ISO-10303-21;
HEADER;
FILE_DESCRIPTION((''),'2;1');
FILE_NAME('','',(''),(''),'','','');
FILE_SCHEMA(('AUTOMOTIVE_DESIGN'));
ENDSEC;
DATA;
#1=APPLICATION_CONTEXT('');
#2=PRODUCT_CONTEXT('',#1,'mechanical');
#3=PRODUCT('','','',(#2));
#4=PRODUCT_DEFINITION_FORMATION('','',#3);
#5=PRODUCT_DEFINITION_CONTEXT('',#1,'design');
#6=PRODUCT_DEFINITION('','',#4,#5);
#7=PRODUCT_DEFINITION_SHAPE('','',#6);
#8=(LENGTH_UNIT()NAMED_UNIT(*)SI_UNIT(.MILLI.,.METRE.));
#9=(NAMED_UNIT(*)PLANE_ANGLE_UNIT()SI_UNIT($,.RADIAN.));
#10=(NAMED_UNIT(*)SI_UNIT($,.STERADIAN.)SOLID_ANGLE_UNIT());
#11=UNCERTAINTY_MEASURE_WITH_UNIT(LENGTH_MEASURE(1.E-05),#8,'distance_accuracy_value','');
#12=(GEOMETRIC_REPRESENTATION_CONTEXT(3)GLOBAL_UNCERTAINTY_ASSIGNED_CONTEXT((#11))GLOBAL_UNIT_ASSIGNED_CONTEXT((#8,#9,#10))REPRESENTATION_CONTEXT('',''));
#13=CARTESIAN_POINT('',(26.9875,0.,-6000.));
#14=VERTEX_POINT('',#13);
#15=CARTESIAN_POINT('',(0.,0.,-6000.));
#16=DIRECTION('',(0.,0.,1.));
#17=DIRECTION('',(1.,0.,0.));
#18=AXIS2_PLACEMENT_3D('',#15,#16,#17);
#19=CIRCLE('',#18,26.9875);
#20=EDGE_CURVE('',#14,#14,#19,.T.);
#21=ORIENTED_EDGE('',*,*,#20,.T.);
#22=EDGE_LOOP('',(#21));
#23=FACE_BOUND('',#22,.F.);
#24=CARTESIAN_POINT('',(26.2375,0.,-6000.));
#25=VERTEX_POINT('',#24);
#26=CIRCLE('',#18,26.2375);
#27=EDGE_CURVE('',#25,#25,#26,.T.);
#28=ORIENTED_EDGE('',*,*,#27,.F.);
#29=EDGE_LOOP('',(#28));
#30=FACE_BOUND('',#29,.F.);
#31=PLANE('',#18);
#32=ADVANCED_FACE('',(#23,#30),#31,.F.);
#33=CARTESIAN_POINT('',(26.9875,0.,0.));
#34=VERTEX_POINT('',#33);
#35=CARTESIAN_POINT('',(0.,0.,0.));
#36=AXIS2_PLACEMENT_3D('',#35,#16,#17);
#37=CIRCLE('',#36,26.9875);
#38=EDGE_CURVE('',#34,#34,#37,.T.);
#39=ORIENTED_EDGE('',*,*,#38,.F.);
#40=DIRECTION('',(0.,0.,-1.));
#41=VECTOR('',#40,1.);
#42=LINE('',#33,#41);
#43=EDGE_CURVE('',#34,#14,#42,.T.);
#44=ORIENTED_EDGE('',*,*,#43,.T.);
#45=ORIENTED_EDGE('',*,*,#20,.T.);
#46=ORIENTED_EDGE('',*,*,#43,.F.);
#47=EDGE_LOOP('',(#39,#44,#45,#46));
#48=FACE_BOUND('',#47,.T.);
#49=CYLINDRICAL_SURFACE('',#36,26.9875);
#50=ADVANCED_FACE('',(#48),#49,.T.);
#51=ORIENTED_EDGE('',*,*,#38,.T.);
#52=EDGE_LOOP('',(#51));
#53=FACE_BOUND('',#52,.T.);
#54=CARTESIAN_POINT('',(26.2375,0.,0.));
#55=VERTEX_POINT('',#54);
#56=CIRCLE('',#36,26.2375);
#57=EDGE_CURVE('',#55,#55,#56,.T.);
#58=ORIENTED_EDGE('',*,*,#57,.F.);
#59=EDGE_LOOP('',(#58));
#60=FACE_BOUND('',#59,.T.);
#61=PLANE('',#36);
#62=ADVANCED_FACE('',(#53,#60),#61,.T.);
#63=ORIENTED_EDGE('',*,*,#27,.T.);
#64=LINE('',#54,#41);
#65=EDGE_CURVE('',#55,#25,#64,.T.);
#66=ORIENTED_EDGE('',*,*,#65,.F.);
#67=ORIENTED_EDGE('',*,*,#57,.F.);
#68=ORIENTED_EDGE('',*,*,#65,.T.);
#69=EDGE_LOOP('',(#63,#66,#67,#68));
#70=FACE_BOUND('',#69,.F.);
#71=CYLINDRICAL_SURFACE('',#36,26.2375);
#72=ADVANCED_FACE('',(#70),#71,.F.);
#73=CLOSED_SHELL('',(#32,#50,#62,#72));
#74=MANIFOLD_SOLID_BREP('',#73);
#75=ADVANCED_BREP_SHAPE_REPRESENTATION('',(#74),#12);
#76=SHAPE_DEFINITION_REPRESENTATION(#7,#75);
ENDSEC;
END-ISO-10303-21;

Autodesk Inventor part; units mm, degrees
ref_plane "XZ Plane" through (0, 0, 0) normal (0, 1, 0) x (-1, 0, 0)
ref_plane "XY Plane" through (0, 0, 0) normal (0, 0, 1) x (1, 0, 0)
sketch "Sketch1" plane through (0, 0, 0) normal (0, 0, 1) x (1, 0, 0)
  circle A0 centre (0, 0) radius 26.9875
  circle A1 centre (0, 0) radius 26.2375
  dimension "d0" = 53.975
  dimension "d3" = 52.475
extrude "Extrusion1" add sketch "Sketch1" against normal blind 6000
ref_plane "Work Plane1" through (-26.9875, 0, 0) normal (1, 0, 0) x (0, 1, 0)
properties part number "Tubo-2_1_8" material "Steel, Mild"
